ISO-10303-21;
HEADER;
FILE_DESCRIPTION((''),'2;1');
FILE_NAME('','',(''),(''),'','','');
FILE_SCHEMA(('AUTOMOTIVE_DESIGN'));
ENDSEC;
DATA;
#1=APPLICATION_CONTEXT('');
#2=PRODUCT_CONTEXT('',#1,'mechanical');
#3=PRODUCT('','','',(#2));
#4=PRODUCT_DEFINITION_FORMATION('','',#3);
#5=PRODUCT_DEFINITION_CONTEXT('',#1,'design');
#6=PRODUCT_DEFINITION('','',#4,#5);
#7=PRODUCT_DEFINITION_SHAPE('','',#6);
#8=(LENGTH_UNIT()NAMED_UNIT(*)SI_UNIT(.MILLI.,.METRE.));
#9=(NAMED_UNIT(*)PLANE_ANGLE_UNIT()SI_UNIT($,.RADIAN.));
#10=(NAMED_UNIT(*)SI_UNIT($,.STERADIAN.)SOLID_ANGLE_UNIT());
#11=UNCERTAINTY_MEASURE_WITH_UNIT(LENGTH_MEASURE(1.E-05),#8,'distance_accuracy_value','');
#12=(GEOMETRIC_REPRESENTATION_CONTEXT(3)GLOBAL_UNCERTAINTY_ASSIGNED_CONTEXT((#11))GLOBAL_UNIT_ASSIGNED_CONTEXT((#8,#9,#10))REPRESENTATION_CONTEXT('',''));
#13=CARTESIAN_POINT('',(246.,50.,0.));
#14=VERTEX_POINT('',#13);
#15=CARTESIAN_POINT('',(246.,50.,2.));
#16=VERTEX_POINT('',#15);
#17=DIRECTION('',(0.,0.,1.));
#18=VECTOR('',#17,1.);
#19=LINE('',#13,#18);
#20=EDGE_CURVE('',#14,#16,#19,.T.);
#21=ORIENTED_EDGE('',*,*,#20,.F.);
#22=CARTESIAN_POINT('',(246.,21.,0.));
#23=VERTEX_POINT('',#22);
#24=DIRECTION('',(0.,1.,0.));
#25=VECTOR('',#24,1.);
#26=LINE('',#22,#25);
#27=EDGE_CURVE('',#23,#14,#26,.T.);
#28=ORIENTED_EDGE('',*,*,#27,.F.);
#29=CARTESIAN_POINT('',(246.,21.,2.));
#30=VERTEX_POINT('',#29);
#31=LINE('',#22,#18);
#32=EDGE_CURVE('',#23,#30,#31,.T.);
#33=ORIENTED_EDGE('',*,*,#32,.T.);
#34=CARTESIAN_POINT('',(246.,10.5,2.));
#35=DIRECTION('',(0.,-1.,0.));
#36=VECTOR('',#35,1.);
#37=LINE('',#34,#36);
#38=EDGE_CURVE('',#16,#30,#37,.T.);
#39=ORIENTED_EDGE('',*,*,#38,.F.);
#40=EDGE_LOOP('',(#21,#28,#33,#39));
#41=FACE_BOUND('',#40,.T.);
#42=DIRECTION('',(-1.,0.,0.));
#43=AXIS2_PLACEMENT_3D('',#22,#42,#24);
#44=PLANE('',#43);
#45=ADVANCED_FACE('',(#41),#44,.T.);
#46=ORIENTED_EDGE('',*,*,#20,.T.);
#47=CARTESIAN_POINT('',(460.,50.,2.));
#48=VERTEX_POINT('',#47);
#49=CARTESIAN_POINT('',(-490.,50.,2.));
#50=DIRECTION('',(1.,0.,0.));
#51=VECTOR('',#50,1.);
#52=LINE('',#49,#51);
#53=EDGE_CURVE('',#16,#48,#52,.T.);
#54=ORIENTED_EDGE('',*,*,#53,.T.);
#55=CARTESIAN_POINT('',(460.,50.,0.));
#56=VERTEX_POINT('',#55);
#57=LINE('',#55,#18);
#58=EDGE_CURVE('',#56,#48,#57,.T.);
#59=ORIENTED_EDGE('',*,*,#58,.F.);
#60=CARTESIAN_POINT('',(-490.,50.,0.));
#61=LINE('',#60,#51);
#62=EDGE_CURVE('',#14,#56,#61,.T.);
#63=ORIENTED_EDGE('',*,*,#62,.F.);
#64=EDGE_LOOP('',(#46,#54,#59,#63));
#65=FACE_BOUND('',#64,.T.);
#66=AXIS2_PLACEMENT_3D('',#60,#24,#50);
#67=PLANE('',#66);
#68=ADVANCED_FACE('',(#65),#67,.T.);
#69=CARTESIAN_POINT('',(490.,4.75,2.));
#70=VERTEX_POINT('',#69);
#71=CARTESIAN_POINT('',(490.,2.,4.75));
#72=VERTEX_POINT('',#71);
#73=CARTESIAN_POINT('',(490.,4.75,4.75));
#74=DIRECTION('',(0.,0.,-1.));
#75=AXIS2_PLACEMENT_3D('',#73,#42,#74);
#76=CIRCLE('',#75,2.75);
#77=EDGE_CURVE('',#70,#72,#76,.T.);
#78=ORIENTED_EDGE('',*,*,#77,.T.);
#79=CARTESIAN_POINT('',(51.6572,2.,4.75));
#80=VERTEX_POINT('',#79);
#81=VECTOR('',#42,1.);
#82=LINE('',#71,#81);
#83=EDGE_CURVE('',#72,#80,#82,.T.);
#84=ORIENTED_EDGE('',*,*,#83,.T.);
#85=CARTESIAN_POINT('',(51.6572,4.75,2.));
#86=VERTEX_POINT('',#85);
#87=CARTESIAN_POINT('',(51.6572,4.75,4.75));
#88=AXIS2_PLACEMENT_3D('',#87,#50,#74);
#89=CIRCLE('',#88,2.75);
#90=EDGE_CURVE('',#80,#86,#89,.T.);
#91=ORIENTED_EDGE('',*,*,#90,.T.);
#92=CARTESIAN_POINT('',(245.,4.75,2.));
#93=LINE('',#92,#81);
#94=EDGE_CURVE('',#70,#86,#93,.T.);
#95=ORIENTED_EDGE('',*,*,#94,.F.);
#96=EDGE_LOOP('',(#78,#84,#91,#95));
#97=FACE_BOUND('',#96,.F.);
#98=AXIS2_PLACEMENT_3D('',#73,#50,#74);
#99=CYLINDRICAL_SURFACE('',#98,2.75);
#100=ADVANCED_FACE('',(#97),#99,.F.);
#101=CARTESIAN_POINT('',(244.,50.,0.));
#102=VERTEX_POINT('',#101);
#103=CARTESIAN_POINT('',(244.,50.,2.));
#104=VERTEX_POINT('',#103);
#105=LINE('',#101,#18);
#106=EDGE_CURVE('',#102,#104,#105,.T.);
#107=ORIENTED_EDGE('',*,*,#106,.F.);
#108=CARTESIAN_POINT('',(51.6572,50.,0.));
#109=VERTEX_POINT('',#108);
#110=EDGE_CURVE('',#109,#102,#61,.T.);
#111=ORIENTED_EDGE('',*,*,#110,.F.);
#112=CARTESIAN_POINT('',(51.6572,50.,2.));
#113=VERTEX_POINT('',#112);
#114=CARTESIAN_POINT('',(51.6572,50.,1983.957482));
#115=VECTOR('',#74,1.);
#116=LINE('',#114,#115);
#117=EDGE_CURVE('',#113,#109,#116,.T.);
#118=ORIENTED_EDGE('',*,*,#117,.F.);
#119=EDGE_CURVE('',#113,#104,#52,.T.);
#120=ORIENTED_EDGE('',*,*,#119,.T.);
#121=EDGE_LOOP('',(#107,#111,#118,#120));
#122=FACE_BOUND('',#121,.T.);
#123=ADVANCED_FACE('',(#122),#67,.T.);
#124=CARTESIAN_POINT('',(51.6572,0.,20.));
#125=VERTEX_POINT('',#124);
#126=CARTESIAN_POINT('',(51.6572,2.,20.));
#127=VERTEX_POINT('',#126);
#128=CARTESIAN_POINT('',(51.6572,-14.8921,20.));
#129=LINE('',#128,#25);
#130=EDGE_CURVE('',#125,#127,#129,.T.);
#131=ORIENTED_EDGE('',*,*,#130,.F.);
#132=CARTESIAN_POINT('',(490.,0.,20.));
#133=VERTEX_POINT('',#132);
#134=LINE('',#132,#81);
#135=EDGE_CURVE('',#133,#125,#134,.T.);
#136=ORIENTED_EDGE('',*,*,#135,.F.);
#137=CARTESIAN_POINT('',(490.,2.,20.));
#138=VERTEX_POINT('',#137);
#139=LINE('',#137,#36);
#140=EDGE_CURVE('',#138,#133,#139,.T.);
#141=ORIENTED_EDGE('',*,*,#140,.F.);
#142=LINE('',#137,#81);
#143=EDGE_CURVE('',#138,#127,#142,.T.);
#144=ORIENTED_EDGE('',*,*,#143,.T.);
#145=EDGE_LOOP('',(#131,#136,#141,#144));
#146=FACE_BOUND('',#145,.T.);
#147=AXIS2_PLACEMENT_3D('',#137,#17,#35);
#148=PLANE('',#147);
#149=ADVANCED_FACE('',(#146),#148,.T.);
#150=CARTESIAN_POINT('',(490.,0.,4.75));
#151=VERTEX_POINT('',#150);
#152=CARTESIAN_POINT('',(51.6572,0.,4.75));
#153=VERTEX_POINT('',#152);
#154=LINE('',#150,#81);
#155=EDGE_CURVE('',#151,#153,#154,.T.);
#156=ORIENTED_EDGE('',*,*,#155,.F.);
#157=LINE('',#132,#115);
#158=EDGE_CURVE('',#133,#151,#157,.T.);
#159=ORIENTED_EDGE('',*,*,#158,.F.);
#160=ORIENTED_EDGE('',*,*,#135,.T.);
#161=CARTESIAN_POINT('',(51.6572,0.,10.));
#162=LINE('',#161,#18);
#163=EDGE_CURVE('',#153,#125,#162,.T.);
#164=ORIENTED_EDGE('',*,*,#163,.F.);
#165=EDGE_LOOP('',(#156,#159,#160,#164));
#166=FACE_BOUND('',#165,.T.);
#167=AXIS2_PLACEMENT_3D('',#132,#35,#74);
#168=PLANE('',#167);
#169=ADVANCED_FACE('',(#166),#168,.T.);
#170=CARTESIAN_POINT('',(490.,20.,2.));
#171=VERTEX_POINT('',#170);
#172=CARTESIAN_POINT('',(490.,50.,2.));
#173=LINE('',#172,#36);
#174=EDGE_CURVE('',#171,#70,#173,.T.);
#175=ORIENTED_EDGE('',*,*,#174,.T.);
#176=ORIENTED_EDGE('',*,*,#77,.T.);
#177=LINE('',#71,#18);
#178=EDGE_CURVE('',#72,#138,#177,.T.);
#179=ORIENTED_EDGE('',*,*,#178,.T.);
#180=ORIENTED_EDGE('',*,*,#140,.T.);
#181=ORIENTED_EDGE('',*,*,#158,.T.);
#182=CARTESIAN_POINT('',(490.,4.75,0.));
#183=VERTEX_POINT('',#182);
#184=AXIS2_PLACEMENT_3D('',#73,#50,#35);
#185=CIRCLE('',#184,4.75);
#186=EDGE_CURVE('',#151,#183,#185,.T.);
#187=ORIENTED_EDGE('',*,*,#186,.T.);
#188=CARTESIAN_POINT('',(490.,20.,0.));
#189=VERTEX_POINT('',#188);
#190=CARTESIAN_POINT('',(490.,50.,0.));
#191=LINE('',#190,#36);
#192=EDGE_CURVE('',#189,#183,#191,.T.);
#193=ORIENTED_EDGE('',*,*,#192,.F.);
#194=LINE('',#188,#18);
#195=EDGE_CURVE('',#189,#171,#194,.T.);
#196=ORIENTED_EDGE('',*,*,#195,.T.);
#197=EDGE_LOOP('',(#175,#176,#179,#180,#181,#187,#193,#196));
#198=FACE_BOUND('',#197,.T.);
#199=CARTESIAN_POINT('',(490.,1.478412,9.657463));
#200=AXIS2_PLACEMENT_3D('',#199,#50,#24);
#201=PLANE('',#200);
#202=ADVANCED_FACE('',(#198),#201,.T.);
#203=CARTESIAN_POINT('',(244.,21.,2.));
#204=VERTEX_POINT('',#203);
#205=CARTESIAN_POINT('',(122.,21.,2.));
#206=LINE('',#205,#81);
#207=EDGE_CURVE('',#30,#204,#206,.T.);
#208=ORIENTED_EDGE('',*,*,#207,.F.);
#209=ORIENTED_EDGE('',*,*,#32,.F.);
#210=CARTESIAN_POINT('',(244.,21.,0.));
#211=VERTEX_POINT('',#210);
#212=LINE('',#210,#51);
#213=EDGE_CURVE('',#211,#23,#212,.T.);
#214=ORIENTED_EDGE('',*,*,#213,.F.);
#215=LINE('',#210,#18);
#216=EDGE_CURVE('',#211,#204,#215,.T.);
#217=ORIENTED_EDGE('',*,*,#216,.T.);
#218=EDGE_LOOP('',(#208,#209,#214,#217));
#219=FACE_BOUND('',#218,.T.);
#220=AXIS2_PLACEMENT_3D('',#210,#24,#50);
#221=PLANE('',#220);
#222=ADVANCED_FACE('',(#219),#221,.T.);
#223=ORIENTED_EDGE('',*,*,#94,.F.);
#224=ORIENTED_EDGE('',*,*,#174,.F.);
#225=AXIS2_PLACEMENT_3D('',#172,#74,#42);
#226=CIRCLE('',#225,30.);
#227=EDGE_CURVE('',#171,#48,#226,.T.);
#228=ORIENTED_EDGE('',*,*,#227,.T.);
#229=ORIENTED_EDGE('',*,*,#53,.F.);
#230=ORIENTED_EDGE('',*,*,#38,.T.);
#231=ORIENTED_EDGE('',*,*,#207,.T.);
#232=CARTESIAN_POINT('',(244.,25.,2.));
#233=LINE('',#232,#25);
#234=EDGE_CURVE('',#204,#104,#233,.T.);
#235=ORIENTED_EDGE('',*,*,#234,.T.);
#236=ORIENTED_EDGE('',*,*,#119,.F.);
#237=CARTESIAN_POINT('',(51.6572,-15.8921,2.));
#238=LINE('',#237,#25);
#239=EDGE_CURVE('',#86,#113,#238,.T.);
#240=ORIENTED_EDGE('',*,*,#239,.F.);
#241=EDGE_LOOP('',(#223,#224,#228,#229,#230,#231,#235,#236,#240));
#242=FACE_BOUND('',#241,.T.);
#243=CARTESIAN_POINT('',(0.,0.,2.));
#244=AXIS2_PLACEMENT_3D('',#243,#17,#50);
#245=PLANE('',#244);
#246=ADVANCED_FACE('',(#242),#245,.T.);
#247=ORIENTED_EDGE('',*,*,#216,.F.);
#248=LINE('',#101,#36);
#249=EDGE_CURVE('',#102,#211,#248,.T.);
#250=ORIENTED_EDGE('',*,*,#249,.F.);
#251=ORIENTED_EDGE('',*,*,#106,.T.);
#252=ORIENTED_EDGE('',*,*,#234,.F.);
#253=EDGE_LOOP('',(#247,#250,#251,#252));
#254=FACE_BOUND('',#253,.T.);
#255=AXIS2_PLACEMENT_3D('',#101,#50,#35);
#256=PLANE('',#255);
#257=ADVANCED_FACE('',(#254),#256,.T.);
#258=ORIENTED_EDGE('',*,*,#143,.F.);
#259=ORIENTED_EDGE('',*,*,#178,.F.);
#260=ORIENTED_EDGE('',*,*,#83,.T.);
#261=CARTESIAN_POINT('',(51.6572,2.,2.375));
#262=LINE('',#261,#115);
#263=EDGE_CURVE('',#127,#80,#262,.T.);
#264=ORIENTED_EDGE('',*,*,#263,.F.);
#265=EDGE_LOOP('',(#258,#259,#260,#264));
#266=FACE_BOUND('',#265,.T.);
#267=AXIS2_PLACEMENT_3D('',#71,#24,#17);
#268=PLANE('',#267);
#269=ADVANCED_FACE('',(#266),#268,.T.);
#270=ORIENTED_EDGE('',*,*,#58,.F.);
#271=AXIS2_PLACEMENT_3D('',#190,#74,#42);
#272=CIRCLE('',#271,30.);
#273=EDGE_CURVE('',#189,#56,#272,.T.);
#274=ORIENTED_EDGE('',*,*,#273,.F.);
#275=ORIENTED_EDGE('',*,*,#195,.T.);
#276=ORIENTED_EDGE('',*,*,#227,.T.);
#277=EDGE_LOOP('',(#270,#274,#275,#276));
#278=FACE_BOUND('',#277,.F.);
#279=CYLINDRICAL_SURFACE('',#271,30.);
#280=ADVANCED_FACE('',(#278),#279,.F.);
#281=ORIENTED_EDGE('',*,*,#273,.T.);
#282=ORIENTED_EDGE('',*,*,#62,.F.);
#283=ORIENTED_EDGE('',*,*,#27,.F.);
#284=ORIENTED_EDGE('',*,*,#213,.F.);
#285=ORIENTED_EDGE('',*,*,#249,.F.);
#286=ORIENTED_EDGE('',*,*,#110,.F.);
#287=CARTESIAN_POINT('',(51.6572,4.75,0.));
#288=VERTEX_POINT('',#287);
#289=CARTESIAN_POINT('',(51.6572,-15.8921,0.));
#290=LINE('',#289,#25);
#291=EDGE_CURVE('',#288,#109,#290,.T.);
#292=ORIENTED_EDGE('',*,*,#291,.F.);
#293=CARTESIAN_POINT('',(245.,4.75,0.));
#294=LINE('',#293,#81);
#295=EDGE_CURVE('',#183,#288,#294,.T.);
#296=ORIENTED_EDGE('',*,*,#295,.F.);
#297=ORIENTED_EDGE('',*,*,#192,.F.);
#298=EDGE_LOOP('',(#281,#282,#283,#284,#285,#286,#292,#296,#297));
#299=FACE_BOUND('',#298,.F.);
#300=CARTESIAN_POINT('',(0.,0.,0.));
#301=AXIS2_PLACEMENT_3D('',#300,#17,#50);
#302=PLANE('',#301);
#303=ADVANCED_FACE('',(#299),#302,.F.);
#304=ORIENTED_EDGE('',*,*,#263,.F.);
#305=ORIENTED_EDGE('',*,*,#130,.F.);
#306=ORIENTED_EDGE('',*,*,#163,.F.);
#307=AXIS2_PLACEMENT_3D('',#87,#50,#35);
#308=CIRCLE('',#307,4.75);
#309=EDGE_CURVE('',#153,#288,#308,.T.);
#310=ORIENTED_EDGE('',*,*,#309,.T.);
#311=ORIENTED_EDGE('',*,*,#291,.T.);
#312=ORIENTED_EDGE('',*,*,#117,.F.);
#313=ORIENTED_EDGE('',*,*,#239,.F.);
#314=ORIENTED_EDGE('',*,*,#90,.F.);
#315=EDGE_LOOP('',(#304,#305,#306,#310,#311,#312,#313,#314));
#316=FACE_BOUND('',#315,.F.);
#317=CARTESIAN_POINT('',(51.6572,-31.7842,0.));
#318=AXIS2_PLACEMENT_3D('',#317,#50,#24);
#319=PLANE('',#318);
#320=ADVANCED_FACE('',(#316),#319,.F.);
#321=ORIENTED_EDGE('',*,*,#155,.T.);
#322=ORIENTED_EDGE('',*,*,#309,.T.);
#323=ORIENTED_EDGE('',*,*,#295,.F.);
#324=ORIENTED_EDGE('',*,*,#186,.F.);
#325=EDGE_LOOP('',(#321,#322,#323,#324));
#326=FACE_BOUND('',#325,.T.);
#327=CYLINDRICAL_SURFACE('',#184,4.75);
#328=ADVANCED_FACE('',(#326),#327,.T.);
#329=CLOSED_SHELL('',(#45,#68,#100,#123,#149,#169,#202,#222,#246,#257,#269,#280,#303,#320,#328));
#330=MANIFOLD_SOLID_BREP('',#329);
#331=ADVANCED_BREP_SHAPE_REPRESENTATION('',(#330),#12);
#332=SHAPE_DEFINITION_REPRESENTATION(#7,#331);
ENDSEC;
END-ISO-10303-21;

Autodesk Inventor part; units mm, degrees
ref_plane "YZ Plane" through (0, 0, 0) normal (1, 0, 0) x (0, 1, 0)
ref_plane "XZ Plane" through (0, 0, 0) normal (0, 1, 0) x (-1, 0, 0)
ref_plane "XY Plane" through (0, 0, 0) normal (0, 0, 1) x (1, 0, 0)
sketch "Sketch1" plane through (0, 0, 0) normal (0, 0, 1) x (1, 0, 0)
  line L0 (-490, 50) -> (490, 50)
  line L1 (490, 50) -> (490, 0)
  line L2 (490, 0) -> (-490, 0)
  line L3 (-490, 0) -> (-490, 50)
  point P0 (0, 0)
  point P1 (0, 0)
  dimension "d0" = 980
  dimension "d1" = 50
extrude "Plate1" add sketch "Sketch1" along normal blind 2
sketch "Sketch2" plane through (490, 2, 0) normal (0, -1, 0) x (1, 0, 0)
  line L0 (-980, 0) -> (0, 0)
  line L1 (0, 0) -> (0, 20)
  line L2 (0, 20) -> (-980, 20)
  line L3 (-980, 20) -> (-980, 0)
edge flange "Flange1" height 20 angle 90 thickness 2 bend radius 2.75 thickness toward (0, -1, 0) relief tear relief width 2 relief depth 1 edges at (0, 0, 2) wall of the first edge with corners at (-490, 2, 0) (490, 2, 0) (490, 2, 20) (-490, 2, 20)
bend "Bend1"
corner "Corner1"
sketch "Sketch5" plane through (0, 0, 0) normal (0, 0, -1) x (-1, 0, 0)
  line L0 (490, 50) -> (-490, 50) projected
  line L1 (490, 0) -> (-490, 0) projected
  circle A0 centre (0, 50) radius 30
  line L2 (-490, 0) -> (-490, 50)
  line L3 (490, 0) -> (490, 50)
  circle A1 centre (-490, 50) radius 30
  circle A2 centre (490, 50) radius 30
  line L4 (-246, 50) -> (-244, 50)
  line L5 (-244, 50) -> (-244, 21)
  line L6 (-244, 21) -> (-246, 21)
  line L7 (-246, 21) -> (-246, 50)
  line L8 (244, 50) -> (246, 50)
  line L9 (246, 50) -> (246, 21)
  line L10 (246, 21) -> (244, 21)
  line L11 (244, 21) -> (244, 50)
  line L12 (0, 50) -> (0, 0) construction
  point P0 (245, 21)
  point P1 (-245, 21)
  point P2 (-490, 20)
  point P3 (-460, 50)
  point P4 (-30, 50)
  point P5 (30, 50)
  point P6 (460, 50)
  point P7 (490, 20)
  point P8 (-244, 50)
  point P9 (246, 50)
  dimension "d33" = 60
  dimension "d34" = 2
  dimension "d35" = 29
  dimension "d36" = 490
extrude "Extrusion1" cut sketch "Sketch5" against normal through all contours L9 L10 L11 L0 | L0 L3 A2 | A0 L0 | L5 L6 L7 L0 | L2 L0 A1 picked at (470.2507, 47.7748) picked at (6.5355, 34.7298) picked at (-470.2507, 47.7748)
sketch "Sketch7" plane through (0, 0, 2) normal (0, 0, 1) x (1, 0, 0)
  line L0 (468.7934, 20.88) -> (468.7934, 8.88) construction
  line L1 (468.7934, 8.88) -> (280.354, 8.88) construction
  line L2 (280.354, 8.88) -> (280.354, 20.88) construction
  line L3 (280.354, 20.88) -> (468.7934, 20.88) construction
  line L4 (-244, 50) -> (-30, 50) projected
  point P0 (0, 0)
  point P1 (-1, 50)
  point P2 (1, 50)
  dimension "d30" = 12
mark "Mark1"
sketch "Sketch8" plane through (0, 0, 0) normal (0, 0, -1) x (-1, 0, 0)
  line L0 (-244, 50) -> (-51.6572, 50)
  line L1 (-51.6572, 50) -> (502.6857, 50)
  line L2 (502.6857, 50) -> (502.6857, -31.7842)
  line L3 (502.6857, -31.7842) -> (-51.6572, -31.7842)
  line L4 (-51.6572, -31.7842) -> (-51.6572, 50)
  point P0 (0, 0)
extrude "Extrusion3" cut sketch "Sketch8" along normal through all both and the other way through all
equation "\"d1\" = Стрингер_7"
equation "\"d2\" = Thickness"
equation "\"d3\" = BendReliefWidth"
equation "\"d4\" = BendReliefDepth"
equation "\"d5\" = MinimumRemnant"
equation "\"d6\" = TransitionRadius"
equation "\"d9\" = BendRadius"
equation "\"d10\" = CornerReliefSize"
equation "\"d11\" = GapSize"
equation "\"d12\" = JacobiRadiusSize"
equation "\"BendReliefWidth\" = Thickness"
equation "\"BendReliefDepth\" = 0.5 * Thickness"
equation "\"CornerReliefSize\" = 4 * Thickness"
equation "\"MinimumRemnant\" = 2 * Thickness"
equation "\"TransitionRadius\" = BendRadius"
equation "\"JacobiRadiusSize\" = BendRadius"
equation "\"GapSize\" = Thickness"
equation "\"Стрингер_7\" = 50"
equation "\"Thickness\" = 2"
equation "\"BendRadius\" = 2.75"
properties part number "MSC 505 STRINGER BOARD BELLY FACE" material "Stainless Steel"
